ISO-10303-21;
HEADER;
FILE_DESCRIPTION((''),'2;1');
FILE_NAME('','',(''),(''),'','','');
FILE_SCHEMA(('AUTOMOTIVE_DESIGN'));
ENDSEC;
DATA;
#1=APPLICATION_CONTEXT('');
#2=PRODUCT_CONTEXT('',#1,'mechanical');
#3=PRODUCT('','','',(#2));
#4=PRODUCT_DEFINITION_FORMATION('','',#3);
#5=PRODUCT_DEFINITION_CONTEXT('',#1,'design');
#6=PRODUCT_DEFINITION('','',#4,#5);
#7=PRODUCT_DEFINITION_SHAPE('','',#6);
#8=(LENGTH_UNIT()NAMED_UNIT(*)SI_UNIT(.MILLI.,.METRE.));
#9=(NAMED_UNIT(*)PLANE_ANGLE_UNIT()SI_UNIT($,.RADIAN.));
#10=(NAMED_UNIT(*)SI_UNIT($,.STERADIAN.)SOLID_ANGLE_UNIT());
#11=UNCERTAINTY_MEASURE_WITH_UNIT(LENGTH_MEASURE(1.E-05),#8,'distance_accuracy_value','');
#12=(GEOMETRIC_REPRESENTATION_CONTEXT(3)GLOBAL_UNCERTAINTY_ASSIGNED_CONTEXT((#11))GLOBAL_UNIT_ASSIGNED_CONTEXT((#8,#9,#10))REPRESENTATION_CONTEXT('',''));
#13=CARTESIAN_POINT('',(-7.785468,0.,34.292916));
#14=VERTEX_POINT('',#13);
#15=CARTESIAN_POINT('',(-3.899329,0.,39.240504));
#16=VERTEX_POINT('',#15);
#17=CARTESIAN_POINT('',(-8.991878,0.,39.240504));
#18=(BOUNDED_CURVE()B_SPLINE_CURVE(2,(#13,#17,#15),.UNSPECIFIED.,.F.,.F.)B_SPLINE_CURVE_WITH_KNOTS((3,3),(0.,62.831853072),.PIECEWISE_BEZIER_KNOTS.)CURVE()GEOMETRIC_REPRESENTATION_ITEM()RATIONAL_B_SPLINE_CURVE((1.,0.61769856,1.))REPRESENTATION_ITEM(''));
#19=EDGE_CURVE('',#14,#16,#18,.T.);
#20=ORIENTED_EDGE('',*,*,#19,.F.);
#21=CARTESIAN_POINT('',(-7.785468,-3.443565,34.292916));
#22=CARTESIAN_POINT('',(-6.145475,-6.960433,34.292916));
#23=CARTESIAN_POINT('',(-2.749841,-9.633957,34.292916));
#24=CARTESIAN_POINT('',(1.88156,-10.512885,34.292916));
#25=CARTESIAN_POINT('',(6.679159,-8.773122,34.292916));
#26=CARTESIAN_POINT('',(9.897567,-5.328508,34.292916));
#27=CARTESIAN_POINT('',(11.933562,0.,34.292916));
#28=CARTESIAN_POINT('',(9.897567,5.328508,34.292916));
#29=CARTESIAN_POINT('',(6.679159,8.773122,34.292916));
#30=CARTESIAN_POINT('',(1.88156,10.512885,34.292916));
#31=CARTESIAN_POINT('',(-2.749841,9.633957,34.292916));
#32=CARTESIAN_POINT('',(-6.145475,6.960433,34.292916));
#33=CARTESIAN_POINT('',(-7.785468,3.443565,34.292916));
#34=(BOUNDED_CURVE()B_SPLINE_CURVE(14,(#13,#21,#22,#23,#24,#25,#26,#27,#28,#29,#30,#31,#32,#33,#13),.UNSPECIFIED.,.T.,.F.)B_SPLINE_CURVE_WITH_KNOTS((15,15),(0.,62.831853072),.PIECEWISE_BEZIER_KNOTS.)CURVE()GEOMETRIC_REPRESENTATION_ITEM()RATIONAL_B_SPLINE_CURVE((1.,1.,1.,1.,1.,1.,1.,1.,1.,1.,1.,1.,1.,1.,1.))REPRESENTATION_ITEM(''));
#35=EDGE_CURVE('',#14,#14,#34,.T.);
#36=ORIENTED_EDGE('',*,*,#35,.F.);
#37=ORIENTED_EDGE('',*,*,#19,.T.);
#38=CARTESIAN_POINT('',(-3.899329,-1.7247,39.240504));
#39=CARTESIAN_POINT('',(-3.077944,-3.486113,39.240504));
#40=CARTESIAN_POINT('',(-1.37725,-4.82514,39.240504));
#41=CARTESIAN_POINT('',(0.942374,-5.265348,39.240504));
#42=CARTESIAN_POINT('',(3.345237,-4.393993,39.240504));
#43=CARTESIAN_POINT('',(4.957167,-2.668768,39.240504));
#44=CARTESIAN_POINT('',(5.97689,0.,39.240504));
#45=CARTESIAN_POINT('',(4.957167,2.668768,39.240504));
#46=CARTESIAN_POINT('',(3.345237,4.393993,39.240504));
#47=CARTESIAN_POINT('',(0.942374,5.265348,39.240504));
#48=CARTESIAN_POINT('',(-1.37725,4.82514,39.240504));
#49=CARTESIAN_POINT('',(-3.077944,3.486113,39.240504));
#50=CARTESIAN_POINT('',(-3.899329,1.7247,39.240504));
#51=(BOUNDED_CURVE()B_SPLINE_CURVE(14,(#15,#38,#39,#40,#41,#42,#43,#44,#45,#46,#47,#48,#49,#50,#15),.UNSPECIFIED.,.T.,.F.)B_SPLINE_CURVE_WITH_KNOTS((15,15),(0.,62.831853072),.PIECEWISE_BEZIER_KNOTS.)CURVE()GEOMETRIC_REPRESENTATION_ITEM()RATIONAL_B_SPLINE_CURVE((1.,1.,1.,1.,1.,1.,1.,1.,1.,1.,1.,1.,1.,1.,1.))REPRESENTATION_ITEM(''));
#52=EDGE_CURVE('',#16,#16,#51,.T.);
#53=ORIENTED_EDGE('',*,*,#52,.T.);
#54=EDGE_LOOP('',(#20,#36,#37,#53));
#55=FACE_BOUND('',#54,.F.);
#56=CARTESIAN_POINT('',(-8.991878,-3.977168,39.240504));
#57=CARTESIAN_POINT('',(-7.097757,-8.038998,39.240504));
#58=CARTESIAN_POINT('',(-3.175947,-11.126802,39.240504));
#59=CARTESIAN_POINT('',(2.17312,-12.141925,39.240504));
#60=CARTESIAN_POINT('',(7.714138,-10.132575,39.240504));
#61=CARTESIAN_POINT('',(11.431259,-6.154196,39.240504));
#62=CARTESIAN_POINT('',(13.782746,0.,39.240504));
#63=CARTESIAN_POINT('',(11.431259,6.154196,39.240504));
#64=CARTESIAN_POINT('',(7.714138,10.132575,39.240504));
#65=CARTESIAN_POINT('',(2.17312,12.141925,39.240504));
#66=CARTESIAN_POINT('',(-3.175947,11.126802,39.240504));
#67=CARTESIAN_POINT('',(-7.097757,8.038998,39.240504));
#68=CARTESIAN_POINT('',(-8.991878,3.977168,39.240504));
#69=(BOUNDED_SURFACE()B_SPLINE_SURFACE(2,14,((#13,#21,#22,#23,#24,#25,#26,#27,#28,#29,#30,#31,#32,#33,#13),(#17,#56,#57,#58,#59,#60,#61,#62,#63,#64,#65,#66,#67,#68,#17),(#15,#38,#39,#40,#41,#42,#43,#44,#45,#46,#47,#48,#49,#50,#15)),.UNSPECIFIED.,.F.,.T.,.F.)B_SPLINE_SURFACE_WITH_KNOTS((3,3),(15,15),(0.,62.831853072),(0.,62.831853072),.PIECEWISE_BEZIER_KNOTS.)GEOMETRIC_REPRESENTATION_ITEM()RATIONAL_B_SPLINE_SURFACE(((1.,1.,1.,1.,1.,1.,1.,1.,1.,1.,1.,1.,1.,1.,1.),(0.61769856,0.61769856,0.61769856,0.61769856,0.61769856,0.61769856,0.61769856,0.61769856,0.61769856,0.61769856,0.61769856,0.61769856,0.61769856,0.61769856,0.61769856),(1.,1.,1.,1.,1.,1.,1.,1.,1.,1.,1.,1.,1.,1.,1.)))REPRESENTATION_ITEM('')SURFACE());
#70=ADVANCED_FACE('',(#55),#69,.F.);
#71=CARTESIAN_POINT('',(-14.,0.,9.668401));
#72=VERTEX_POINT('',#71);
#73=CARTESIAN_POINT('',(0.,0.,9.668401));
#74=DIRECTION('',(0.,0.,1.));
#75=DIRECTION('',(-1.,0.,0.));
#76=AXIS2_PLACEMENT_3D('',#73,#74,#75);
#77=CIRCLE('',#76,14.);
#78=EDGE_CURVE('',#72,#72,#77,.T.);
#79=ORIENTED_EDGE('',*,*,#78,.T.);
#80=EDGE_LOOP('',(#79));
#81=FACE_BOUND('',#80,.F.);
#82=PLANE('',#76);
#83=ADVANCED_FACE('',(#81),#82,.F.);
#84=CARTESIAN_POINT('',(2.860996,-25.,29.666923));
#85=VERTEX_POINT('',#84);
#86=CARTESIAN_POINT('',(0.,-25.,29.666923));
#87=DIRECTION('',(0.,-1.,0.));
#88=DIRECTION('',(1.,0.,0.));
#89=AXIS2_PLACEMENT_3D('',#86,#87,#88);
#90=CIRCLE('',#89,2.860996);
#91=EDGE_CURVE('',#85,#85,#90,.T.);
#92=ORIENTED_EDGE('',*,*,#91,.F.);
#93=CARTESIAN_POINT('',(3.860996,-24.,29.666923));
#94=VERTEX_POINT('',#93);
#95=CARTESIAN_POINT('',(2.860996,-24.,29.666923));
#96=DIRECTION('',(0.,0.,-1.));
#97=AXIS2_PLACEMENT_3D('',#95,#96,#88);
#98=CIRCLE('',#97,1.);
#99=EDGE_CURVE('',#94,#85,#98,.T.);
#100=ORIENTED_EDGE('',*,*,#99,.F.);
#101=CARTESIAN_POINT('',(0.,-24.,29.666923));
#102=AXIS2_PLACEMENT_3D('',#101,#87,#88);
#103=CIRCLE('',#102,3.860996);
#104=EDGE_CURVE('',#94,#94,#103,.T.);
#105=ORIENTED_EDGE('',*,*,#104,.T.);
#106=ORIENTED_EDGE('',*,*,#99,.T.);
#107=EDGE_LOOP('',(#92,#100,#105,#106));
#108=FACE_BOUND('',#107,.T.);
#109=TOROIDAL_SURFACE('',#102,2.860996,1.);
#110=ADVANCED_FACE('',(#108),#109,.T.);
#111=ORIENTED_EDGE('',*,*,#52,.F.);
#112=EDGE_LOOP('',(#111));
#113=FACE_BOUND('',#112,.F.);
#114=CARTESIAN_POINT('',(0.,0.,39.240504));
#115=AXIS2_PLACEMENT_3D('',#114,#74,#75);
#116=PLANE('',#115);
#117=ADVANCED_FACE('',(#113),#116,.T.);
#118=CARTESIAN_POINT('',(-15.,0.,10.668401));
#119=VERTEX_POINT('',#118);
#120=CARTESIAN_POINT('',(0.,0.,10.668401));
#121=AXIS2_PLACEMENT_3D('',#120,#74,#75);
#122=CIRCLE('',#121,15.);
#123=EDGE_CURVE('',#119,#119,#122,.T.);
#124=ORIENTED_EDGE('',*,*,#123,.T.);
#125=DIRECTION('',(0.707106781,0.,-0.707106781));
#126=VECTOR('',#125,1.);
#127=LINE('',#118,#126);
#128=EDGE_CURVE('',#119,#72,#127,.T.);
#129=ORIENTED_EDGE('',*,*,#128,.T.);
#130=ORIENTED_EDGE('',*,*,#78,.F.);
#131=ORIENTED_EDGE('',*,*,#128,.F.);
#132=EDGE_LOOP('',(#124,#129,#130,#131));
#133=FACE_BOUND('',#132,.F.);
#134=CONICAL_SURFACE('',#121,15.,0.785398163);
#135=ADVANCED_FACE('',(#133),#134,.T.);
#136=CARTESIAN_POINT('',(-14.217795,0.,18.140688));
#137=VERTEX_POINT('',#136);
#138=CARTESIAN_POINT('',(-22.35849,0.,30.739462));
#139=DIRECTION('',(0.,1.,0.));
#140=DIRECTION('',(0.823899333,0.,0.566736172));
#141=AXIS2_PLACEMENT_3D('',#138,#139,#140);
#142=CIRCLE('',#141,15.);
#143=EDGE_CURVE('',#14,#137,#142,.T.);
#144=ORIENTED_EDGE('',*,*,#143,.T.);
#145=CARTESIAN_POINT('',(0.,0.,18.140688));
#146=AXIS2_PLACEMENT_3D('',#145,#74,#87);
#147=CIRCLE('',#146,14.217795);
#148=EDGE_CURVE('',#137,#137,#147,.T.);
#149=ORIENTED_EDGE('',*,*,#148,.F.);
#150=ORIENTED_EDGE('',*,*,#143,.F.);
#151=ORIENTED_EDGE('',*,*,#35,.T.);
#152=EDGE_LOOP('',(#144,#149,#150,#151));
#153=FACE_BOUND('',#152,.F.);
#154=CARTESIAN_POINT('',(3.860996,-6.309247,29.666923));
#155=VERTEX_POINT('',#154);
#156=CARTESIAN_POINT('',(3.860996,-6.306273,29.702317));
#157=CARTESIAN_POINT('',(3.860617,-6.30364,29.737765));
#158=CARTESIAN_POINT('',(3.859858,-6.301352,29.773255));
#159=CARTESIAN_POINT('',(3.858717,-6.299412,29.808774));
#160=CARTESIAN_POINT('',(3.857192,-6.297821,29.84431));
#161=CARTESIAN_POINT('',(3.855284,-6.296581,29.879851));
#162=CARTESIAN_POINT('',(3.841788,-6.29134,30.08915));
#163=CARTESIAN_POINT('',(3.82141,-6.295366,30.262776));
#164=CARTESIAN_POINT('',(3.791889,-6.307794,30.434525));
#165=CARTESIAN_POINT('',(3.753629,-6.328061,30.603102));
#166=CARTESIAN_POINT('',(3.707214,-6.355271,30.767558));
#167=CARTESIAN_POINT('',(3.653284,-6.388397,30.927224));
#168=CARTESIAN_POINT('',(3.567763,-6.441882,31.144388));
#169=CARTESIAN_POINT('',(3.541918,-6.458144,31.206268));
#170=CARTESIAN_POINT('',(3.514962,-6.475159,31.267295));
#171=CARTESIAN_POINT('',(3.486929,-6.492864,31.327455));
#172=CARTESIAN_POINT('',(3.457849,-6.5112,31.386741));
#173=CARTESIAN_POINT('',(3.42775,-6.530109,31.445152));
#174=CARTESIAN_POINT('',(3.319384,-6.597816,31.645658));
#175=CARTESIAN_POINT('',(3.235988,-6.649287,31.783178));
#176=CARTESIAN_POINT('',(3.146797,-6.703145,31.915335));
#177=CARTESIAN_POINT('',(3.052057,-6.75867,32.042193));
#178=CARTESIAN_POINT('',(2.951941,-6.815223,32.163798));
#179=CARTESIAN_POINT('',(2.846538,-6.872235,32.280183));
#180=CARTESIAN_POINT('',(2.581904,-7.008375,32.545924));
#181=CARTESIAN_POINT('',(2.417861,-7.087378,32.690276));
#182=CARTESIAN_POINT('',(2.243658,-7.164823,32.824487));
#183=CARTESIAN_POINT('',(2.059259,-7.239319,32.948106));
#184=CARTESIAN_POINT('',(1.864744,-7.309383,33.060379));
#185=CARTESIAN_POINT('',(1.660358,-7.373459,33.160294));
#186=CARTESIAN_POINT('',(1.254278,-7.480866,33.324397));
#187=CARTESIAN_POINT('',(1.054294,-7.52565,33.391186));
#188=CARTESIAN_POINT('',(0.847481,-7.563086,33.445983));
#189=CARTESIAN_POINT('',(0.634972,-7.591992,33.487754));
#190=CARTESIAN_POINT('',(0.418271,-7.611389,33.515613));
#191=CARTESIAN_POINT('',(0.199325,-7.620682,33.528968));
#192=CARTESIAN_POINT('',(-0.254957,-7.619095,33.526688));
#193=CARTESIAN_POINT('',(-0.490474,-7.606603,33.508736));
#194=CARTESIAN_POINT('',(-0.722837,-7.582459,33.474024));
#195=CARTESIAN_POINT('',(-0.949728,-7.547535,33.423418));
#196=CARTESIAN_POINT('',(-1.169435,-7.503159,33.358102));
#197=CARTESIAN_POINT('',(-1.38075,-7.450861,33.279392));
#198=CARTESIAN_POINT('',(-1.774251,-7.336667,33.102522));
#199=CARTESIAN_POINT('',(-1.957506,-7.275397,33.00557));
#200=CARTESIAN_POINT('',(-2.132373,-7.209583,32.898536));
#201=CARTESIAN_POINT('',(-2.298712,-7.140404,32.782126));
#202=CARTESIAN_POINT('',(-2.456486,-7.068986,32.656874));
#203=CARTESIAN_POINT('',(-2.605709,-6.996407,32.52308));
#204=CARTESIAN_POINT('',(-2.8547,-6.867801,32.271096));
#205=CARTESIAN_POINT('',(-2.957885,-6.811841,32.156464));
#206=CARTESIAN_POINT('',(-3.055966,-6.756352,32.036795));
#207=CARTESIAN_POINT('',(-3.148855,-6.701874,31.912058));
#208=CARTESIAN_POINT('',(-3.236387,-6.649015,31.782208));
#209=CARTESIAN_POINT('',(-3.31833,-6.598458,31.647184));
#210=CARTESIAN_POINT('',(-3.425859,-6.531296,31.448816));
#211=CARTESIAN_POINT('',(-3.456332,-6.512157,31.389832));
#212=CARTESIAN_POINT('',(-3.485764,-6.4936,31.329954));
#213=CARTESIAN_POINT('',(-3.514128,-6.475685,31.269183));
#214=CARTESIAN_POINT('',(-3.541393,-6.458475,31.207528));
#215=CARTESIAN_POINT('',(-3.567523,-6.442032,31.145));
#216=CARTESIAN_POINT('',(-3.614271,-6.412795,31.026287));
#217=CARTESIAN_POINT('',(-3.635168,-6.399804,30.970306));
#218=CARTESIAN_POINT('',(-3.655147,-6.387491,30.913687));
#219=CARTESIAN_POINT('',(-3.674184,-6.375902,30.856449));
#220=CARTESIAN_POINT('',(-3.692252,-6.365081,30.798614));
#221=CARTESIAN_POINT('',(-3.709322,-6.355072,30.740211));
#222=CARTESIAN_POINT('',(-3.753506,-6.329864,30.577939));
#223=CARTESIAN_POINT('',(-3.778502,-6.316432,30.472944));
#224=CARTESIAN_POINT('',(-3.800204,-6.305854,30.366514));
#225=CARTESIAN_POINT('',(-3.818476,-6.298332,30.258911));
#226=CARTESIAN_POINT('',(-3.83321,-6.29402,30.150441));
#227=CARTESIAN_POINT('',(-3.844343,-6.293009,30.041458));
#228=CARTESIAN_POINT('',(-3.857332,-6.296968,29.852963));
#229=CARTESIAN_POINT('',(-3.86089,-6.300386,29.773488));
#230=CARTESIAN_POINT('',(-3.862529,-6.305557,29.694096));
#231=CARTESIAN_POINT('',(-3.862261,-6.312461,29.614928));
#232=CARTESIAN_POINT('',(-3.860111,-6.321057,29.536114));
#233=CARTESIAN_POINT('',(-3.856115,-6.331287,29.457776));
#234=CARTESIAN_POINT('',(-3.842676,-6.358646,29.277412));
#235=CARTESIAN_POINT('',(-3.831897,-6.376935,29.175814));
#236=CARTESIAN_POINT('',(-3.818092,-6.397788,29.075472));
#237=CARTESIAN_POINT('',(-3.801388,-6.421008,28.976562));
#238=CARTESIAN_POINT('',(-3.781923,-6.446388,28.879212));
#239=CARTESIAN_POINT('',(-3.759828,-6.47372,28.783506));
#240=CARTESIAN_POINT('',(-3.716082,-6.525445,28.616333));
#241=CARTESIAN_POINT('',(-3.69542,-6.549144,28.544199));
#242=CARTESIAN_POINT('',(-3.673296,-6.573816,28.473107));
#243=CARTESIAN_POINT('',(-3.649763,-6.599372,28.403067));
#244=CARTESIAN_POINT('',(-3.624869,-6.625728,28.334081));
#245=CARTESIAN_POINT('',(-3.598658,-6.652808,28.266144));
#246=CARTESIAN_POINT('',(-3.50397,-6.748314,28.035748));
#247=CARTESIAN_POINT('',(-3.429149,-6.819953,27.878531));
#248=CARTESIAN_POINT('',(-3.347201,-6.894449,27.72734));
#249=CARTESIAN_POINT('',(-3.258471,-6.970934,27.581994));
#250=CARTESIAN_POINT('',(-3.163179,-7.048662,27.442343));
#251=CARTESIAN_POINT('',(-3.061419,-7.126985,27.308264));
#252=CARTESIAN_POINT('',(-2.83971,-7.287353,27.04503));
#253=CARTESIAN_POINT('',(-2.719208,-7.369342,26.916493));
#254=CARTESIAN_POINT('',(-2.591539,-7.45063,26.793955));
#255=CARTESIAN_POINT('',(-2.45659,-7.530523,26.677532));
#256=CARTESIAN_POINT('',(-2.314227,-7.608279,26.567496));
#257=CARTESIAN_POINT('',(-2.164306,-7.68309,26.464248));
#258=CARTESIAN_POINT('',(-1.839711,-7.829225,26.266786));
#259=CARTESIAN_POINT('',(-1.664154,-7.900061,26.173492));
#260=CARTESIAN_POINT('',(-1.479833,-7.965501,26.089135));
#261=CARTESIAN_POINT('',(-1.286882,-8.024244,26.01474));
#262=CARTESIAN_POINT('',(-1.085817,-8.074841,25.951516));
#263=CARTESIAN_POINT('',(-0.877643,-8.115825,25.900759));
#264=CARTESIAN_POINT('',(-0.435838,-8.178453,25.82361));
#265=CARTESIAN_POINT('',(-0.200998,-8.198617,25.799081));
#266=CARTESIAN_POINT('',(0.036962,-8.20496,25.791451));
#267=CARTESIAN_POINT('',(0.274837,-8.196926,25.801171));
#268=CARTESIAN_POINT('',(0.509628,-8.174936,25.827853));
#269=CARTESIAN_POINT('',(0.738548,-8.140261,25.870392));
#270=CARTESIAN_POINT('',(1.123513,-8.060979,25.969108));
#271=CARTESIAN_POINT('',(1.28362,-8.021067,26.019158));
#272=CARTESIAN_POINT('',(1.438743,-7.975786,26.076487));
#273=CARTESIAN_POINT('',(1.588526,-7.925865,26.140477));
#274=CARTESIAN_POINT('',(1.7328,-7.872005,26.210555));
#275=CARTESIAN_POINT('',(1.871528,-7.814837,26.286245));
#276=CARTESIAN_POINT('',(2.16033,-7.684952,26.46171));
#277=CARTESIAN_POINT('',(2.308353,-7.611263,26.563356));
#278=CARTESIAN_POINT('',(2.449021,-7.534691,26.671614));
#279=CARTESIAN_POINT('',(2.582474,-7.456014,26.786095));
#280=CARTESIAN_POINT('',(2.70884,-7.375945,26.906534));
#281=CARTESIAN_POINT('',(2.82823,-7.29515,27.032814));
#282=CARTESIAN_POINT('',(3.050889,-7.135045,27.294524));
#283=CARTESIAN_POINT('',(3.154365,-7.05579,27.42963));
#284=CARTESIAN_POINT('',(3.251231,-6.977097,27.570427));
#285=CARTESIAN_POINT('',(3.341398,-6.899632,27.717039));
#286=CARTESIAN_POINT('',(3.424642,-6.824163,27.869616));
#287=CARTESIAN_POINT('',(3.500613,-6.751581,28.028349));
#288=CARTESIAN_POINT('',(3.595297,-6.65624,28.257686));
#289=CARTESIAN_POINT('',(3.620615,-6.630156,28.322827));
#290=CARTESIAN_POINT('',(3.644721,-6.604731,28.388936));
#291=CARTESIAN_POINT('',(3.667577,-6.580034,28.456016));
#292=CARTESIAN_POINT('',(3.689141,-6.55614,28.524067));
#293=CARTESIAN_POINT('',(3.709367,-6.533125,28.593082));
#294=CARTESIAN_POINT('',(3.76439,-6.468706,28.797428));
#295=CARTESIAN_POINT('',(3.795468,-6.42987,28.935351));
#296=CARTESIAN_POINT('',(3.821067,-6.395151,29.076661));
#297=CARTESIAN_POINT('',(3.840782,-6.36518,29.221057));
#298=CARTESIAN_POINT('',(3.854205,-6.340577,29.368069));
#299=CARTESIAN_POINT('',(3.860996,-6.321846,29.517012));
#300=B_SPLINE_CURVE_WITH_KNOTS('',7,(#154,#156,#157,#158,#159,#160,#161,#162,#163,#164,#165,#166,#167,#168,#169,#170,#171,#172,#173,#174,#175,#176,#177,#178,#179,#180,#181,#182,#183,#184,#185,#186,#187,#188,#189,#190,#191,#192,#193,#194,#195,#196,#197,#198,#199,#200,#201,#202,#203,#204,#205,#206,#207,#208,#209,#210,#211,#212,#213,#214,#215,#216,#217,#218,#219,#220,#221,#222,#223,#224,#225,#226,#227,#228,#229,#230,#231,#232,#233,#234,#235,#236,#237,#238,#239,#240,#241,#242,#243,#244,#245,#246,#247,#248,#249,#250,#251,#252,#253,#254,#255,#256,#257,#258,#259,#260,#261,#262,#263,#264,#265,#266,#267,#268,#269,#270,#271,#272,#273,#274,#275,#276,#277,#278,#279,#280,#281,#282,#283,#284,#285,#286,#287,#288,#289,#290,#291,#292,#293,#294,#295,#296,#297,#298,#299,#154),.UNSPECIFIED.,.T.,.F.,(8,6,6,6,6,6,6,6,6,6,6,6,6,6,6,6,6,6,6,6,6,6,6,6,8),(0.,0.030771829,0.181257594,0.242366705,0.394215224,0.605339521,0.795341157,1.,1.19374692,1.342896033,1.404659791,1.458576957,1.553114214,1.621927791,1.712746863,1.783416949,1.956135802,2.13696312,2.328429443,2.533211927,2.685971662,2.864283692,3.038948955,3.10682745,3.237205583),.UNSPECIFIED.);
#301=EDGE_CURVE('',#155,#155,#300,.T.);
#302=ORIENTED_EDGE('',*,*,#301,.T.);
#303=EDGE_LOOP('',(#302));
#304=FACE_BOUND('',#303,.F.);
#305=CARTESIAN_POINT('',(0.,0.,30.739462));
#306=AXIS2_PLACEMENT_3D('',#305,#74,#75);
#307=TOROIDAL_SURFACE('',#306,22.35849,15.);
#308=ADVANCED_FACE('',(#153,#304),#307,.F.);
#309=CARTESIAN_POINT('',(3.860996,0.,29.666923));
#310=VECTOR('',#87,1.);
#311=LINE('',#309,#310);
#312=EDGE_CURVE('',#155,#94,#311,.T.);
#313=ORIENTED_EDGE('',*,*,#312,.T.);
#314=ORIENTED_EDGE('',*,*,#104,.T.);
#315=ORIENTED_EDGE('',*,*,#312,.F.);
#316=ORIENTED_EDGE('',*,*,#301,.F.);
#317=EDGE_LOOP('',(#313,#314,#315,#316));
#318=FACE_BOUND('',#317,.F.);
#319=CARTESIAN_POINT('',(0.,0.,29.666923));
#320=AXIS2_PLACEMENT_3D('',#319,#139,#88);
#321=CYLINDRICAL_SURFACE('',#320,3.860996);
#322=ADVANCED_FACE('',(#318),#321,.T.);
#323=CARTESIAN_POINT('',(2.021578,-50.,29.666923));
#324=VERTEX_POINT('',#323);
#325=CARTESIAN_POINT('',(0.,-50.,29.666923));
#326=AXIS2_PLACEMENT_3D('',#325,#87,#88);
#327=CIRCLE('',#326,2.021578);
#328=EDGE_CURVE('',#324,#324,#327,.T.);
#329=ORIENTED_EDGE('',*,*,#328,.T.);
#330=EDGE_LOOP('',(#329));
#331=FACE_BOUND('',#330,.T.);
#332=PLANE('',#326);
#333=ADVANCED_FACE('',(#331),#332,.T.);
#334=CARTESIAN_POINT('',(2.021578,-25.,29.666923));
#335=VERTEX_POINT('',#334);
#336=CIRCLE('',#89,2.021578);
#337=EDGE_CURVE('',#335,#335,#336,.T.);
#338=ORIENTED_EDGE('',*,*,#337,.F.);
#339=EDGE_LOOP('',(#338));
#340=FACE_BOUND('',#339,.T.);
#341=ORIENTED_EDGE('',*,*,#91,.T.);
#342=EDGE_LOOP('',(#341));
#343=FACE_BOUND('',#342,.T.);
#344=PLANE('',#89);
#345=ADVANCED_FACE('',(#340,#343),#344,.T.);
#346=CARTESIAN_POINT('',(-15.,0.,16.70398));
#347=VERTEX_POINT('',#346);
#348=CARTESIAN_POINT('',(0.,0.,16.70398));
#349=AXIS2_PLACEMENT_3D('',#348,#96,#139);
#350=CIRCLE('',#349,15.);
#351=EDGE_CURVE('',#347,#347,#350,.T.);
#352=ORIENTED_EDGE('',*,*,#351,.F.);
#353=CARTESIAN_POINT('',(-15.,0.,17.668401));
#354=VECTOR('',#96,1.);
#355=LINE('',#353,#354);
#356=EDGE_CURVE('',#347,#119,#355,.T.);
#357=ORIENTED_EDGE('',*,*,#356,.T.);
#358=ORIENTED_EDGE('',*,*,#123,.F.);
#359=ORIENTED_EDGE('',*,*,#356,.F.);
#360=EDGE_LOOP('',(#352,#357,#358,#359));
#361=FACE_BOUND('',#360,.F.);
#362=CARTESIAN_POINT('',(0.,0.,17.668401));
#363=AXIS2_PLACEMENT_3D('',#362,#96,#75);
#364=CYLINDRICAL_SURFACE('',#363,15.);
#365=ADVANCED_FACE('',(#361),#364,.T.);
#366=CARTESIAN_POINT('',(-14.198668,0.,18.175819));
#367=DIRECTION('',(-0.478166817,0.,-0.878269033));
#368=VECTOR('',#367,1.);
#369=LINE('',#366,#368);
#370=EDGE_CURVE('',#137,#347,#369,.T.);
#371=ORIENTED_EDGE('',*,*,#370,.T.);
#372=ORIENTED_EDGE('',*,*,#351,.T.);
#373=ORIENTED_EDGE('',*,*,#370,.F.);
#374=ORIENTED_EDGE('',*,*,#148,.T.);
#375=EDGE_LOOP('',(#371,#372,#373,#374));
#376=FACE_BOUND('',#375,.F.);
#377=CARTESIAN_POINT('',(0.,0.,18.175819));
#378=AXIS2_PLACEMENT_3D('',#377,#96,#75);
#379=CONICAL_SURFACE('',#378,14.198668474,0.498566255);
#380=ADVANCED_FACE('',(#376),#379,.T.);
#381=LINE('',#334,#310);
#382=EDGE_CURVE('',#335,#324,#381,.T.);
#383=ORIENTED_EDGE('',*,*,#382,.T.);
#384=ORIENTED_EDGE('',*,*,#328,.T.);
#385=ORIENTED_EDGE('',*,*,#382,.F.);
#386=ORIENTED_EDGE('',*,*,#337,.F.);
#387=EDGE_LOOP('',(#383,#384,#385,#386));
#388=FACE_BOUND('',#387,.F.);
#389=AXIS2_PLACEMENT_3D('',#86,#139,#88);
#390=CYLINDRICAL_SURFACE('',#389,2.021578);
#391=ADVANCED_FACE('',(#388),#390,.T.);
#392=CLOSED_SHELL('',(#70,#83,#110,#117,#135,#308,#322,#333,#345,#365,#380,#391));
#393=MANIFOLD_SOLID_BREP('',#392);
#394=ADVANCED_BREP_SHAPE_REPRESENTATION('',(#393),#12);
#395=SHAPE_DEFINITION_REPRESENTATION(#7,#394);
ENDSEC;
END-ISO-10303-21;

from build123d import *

# Parameters (mm, degrees)
F2_R     = 3.8609958539
F3_DEPTH = 25
F4_R     = 2.0215779579
F5_DEPTH = 25
F6_R     = 4
F8_R     = 1
F9_SIZE  = 1


# Not quite as in the source:
# - a fillet or chamfer that OpenCascade refuses, or shapes differently, is made with other operations: its cross-section is extruded or revolved along the edge and cut away or added


with BuildPart() as f1:
    # F0 (on Front) → F1 (revolve)
    with BuildSketch(Plane.XZ):
        with BuildLine():
            Line((0, 9.6684011082), (0, 39.240504275))
            Line((0, 39.240504275), (-10, 39.240504275))
            ThreePointArc((-10, 39.240504275), (-7.7458675852, 27.3525359295), (-15, 17.6684011082))
            Line((-15, 17.6684011082), (-15, 9.6684011082))
            Line((-15, 9.6684011082), (0, 9.6684011082))
        make_face()
    revolve(axis=Axis((0, 0, 24.4544526916), (0, 0, 1)))

    # F2 (on Front) → F3 (join)
    with BuildSketch(Plane.XZ):
        with Locations((0, 29.6669229865)):
            Circle(F2_R)
    extrude(amount=F3_DEPTH)

    # F4 (on face) → F5 (join)
    with BuildSketch(Plane.XZ.offset(25)):
        with Locations((0, 29.6669229865)):
            Circle(F4_R)
    extrude(amount=F5_DEPTH)

    # F6
    f6_edges = [f1.edges().sort_by_distance(p)[0] for p in [
        (10, 0, 39.240504),
    ]]
    fillet(f6_edges, radius=F6_R)

    # F7: chamfer of 1 on 1 edges, made by hand

    # F7_s1 → F7_t2 (revolve, cut)
    with BuildSketch(Plane.XZ):
        with BuildLine():
            Line((-14.1986684737, 18.1758192127), (-15.0191266727, 16.668849252))
            Line((-15.0191266727, 16.668849252), (-15.0391266727, 16.668849252))
            ThreePointArc((-15.0391266727, 16.668849252), (-15.02, 17.1686251801), (-15.02, 17.6684011082))
            Line((-15.02, 17.6684011082), (-15.00981132, 17.685829189))
            ThreePointArc((-15.00981132, 17.685829189), (-14.6008655323, 17.9246397079), (-14.2095227335, 18.192617577))
            Line((-14.2095227335, 18.192617577), (-14.1986684737, 18.1758192127))
        make_face()
    revolve(axis=Axis((0, 0, 17.6684011082), (0, 0, 1)), mode=Mode.SUBTRACT)

    # F8
    f8_edges = [f1.edges().sort_by_distance(p)[0] for p in [
        (-3.860996, -25, 29.666923),
    ]]
    fillet(f8_edges, radius=F8_R)

    # F9
    f9_edges = [f1.edges().sort_by_distance(p)[0] for p in [
        (15, 0, 9.668401),
    ]]
    chamfer(f9_edges, length=F9_SIZE)


solid = f1.part
